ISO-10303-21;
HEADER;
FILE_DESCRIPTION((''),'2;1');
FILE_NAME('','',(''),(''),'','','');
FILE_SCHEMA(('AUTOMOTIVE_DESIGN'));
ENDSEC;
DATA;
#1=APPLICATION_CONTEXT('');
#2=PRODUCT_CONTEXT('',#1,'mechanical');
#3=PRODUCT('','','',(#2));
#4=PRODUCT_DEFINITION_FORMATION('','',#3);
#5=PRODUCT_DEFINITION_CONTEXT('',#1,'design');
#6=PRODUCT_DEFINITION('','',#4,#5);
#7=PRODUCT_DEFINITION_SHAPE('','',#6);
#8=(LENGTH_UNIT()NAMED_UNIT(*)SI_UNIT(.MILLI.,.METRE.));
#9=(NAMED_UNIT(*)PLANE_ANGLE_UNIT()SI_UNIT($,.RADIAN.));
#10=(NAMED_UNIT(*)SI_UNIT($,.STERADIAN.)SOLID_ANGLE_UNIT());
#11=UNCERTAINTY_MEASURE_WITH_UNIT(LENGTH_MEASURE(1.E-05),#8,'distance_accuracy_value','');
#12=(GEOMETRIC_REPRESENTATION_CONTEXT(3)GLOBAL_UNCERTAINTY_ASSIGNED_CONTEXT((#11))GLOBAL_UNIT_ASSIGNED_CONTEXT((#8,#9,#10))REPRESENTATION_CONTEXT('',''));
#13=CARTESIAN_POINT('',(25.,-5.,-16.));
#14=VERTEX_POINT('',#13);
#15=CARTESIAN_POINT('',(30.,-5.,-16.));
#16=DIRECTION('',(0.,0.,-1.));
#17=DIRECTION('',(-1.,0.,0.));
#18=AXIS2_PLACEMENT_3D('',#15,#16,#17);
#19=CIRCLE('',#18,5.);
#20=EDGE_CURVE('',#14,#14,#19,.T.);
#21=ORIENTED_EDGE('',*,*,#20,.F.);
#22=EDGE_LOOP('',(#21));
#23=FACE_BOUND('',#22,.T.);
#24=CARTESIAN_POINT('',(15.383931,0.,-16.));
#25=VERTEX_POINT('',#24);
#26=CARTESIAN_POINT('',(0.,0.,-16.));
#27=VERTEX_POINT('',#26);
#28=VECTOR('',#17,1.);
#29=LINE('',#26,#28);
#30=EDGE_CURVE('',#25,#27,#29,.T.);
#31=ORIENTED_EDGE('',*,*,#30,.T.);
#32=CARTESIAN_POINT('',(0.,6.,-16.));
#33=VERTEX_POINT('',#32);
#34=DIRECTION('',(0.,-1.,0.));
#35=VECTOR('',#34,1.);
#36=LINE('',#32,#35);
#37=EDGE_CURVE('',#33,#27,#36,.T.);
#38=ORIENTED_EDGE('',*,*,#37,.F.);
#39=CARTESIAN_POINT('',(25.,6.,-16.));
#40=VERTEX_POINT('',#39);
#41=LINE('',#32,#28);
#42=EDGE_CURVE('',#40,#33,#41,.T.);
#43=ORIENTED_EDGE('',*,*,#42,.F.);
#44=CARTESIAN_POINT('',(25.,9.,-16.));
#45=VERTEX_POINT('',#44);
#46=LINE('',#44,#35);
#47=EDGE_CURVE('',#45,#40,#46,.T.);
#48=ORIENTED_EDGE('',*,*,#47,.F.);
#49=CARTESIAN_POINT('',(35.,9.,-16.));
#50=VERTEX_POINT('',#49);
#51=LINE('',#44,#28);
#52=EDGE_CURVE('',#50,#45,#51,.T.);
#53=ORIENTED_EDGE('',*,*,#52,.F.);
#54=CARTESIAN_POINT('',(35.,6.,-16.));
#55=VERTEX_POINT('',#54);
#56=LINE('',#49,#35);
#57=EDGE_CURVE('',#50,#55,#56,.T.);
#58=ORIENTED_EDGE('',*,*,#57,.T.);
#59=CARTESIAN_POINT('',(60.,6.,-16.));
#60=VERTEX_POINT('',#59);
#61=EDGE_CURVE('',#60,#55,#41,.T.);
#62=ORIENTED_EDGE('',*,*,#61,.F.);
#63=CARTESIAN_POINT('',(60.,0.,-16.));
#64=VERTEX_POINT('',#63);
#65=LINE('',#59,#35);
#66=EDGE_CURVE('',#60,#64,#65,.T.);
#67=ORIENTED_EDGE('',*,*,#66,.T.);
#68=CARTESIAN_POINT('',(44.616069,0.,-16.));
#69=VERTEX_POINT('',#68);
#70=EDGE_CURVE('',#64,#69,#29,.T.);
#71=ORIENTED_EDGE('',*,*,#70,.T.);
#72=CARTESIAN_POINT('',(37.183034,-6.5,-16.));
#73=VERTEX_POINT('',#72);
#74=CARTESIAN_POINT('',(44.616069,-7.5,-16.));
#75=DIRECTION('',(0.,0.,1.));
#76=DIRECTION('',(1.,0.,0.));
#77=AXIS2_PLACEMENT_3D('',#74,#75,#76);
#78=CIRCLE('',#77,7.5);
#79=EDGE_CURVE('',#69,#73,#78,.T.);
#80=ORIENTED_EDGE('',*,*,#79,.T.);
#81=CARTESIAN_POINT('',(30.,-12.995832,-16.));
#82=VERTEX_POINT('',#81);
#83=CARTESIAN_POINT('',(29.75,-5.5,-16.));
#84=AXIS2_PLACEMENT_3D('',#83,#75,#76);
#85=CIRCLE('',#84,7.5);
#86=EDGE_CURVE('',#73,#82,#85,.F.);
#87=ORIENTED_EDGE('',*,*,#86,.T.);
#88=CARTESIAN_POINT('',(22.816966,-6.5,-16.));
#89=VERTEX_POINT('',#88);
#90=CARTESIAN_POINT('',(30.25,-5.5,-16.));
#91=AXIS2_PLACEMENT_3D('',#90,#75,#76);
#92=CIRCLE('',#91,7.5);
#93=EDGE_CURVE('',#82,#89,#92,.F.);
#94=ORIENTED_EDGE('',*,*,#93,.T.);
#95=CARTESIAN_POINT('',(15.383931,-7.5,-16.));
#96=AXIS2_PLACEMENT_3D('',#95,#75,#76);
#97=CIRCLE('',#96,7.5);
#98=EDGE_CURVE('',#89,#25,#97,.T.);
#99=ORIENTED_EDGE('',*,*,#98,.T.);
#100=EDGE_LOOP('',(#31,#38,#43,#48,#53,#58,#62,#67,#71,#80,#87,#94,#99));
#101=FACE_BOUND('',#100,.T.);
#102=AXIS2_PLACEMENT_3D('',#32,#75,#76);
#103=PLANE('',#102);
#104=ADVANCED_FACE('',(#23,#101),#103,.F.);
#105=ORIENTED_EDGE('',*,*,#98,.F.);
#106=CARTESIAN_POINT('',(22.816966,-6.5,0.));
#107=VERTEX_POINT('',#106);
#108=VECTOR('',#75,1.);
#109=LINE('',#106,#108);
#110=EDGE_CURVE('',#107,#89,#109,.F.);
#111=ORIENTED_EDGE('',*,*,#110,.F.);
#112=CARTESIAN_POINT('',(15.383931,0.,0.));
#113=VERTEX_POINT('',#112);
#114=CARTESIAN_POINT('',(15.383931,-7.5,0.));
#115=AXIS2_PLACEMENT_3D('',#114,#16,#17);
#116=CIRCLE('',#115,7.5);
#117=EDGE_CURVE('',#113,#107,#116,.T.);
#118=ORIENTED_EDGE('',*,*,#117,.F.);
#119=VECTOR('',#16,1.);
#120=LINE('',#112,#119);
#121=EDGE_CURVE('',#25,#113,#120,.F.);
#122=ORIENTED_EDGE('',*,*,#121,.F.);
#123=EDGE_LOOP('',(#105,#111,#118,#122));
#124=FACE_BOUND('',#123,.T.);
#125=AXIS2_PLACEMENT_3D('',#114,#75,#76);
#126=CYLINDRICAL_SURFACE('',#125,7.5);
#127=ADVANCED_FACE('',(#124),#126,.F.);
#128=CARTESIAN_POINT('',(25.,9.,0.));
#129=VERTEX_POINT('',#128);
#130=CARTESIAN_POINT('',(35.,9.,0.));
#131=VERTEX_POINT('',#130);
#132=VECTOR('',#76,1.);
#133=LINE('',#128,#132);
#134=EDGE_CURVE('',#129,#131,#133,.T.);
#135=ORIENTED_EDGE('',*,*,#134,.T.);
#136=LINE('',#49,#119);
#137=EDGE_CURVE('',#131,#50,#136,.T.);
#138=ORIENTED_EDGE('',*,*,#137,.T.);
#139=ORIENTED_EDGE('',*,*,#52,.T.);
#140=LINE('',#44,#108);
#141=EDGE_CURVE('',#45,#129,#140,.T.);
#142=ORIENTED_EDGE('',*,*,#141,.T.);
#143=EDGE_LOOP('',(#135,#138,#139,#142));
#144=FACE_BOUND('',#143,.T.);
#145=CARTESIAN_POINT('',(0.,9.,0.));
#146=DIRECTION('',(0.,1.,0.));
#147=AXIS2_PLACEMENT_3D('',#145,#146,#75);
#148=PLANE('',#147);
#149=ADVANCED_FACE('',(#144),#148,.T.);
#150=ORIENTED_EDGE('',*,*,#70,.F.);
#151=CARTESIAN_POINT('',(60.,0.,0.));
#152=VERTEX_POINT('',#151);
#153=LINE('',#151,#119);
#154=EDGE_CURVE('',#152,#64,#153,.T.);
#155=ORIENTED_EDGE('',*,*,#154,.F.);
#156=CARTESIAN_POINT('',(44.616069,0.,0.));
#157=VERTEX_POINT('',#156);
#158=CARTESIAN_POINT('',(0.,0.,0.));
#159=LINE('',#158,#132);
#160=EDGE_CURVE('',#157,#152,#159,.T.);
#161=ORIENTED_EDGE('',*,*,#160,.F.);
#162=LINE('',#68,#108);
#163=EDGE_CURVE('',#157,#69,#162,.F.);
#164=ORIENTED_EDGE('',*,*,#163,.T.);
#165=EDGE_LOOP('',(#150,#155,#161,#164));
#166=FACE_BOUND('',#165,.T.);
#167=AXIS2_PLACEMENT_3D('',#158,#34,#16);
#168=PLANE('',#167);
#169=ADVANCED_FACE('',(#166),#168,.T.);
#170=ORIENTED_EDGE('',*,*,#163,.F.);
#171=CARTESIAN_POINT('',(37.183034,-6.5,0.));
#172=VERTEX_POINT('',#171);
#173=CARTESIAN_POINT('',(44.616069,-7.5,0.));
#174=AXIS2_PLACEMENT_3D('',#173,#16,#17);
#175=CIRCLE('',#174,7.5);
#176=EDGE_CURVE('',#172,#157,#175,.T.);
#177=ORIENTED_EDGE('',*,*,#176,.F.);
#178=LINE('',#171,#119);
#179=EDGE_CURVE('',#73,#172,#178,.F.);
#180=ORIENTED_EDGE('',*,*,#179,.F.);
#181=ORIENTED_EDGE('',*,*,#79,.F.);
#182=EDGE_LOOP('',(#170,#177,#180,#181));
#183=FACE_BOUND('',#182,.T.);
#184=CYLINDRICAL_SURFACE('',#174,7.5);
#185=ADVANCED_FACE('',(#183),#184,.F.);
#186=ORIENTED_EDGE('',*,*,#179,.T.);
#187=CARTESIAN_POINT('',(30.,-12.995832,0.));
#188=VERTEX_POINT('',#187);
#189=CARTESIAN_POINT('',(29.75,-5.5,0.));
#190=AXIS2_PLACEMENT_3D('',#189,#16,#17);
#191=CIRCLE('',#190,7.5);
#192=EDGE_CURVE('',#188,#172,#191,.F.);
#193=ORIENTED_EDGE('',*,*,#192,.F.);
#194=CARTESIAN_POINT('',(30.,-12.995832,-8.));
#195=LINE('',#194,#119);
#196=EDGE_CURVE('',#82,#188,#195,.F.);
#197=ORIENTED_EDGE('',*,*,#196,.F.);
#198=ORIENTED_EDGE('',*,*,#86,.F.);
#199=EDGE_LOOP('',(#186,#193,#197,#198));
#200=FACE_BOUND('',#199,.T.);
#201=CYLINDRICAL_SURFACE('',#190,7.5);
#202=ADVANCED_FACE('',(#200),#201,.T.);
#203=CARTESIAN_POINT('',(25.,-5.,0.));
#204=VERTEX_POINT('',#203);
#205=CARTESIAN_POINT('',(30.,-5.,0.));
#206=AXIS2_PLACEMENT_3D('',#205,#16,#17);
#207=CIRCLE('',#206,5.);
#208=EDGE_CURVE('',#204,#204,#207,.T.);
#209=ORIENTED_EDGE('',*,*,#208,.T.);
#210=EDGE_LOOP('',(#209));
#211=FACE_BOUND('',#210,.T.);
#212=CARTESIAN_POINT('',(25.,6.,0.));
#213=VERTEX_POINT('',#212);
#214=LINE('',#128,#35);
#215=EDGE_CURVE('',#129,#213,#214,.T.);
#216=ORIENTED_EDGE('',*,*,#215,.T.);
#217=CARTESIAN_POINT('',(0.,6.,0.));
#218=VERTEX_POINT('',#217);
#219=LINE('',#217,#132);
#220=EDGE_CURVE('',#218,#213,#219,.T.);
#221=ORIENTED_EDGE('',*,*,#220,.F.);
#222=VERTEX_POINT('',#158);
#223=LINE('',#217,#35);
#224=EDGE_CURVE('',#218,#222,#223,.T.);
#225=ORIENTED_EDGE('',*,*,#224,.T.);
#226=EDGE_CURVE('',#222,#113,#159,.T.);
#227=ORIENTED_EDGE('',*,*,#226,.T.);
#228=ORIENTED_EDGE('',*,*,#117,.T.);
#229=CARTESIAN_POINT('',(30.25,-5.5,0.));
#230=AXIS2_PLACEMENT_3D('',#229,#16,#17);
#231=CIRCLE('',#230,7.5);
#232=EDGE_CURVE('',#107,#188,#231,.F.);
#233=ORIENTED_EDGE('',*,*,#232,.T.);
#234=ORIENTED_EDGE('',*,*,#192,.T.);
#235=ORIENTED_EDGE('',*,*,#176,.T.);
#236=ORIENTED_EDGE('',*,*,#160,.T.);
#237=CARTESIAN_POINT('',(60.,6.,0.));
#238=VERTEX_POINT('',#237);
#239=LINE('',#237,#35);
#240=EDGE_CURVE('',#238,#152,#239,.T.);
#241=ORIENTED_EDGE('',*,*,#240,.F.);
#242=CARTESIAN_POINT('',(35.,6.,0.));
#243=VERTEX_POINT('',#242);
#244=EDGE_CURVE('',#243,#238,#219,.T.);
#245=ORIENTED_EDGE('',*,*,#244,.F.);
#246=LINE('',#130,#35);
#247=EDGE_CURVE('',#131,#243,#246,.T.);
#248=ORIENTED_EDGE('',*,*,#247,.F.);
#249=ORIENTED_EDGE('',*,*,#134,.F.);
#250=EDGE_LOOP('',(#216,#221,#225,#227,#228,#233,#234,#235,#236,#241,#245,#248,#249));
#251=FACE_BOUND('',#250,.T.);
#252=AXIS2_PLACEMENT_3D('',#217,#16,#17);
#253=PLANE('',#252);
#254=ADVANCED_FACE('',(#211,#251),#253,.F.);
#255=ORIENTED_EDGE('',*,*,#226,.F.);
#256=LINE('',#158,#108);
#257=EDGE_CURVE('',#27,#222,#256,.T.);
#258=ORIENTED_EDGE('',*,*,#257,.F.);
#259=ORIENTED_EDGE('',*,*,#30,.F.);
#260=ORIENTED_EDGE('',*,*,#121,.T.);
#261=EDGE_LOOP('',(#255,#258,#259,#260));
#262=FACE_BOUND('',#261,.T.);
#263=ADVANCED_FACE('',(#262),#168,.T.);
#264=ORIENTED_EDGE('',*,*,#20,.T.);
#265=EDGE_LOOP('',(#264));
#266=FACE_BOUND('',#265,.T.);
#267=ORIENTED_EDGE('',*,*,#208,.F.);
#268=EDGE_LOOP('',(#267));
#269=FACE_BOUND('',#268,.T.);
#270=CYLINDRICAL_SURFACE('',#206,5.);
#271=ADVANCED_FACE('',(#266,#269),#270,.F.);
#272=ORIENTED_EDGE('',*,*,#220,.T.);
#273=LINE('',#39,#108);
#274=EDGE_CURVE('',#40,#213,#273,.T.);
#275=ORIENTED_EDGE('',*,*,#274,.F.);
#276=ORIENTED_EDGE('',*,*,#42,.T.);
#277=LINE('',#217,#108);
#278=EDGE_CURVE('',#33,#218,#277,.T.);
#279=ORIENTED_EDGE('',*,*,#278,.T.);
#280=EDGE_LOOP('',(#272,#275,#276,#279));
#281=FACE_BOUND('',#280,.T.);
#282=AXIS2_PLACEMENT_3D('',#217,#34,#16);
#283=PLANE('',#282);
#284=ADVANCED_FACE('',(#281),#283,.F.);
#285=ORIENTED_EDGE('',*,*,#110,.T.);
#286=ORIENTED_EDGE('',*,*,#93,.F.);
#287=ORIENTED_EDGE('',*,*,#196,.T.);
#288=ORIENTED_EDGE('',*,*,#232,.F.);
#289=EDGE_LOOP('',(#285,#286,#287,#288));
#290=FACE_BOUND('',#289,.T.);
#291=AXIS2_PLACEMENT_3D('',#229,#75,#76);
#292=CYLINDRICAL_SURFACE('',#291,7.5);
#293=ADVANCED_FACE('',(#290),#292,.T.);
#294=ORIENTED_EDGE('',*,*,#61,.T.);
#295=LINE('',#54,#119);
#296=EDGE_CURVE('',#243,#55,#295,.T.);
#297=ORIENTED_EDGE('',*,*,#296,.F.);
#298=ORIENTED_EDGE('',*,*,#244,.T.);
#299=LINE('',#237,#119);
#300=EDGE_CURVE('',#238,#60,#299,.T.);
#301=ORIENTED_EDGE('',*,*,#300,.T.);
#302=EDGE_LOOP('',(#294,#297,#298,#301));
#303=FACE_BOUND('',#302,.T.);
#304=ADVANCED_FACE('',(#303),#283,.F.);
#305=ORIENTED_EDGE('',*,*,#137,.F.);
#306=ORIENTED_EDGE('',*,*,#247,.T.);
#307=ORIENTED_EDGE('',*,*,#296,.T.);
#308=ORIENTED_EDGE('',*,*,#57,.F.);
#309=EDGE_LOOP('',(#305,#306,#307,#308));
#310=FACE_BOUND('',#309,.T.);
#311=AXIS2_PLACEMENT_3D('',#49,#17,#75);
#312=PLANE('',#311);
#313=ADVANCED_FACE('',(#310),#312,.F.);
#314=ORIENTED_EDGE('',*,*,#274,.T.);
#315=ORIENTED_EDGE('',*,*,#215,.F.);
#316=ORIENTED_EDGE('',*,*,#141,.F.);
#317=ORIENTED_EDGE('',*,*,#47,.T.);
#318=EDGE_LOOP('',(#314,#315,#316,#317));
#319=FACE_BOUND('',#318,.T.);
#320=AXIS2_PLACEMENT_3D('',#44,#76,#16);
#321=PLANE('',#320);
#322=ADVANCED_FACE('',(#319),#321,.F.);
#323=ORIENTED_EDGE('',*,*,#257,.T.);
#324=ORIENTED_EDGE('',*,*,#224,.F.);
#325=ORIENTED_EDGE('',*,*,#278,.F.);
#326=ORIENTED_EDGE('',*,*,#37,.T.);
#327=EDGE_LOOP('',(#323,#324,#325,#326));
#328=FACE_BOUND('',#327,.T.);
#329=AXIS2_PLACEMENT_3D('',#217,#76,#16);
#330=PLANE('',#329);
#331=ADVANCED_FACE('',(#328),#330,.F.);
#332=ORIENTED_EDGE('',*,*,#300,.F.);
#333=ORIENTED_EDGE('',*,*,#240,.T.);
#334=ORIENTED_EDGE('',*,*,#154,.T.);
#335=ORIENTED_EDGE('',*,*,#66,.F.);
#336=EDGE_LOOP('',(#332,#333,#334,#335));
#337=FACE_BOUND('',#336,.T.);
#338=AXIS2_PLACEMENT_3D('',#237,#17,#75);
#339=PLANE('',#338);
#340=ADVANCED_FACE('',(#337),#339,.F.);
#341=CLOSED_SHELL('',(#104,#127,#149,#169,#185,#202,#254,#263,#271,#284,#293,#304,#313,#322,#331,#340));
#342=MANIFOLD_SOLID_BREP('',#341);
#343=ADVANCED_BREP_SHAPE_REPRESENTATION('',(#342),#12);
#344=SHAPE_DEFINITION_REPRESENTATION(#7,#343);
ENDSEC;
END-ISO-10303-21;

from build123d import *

# Parameters (mm, degrees)
SKETCH1_W           = 60
SKETCH1_H           = 16
BOSS_EXTRUDE1_DEPTH = 6
SKETCH2_W           = 10
SKETCH2_H           = 16
BOSS_EXTRUDE2_DEPTH = 3
SKETCH4_W           = 14.5
SKETCH4_H           = 16
BOSS_EXTRUDE3_DEPTH = 13
SKETCH5_R           = 5
CUT_EXTRUDE1_DEPTH  = 64.442887702
FILLET1_R           = 7.5
FILLET2_R           = 7.5


with BuildPart() as part:
    # Sketch1 → Boss-Extrude1 (new body)
    with BuildSketch(Plane(origin=(0, 0, 0), x_dir=(1, 0, 0), z_dir=(0, 1, 0))):
        with Locations((30, 8)):
            Rectangle(SKETCH1_W, SKETCH1_H)
    extrude(amount=BOSS_EXTRUDE1_DEPTH)

    # Sketch2 → Boss-Extrude2 (add)
    with BuildSketch(Plane(origin=(0, 6, 0), x_dir=(1, 0, 0), z_dir=(0, 1, 0))):
        with Locations((30, 8)):
            Rectangle(SKETCH2_W, SKETCH2_H)
    extrude(amount=BOSS_EXTRUDE2_DEPTH)

    # Sketch4 → Boss-Extrude3 (add)
    with BuildSketch(Plane.XZ):
        with Locations((30, -8)):
            Rectangle(SKETCH4_W, SKETCH4_H)
    extrude(amount=BOSS_EXTRUDE3_DEPTH)

    # Sketch5 → Cut-Extrude1 (cut, through all)
    with BuildSketch(Plane(origin=(0, 0, -16), x_dir=(-1, 0, 0), z_dir=(0, 0, -1))):
        with Locations((-30, -5)):
            Circle(SKETCH5_R)
    extrude(amount=-CUT_EXTRUDE1_DEPTH, mode=Mode.SUBTRACT)

    # Fillet1
    # the kernel refuses this fillet: 7.5 mm, written as the material it takes off along each edge
    with BuildSketch(Plane(origin=(22.75, -13, -34.75), x_dir=(0, 1, 0), z_dir=(0, 0, 1))) as fillet1_piece_1:
        with BuildLine():
            CenterArc((FILLET1_R, -FILLET1_R), FILLET1_R, 90, 90)
            Line((0, -FILLET1_R), (0, 0))
            Line((0, 0), (FILLET1_R, 0))
        make_face()
    extrude(amount=53.5, mode=Mode.SUBTRACT)
    with BuildSketch(Plane(origin=(37.25, -13, 18.75), x_dir=(-1, 0, 0), z_dir=(0, 0, -1))) as fillet1_piece_2:
        with BuildLine():
            CenterArc((FILLET1_R, FILLET1_R), FILLET1_R, 180, 90)
            Line((0, FILLET1_R), (0, 0))
            Line((0, 0), (FILLET1_R, 0))
        make_face()
    extrude(amount=53.5, mode=Mode.SUBTRACT)

    # Fillet2
    fillet2_edges = [part.edges().sort_by_distance(p)[0] for p in [
        (22.75, 0, -8),
        (37.25, 0, -8),
    ]]
    fillet(fillet2_edges, radius=FILLET2_R)


solid = part.part
